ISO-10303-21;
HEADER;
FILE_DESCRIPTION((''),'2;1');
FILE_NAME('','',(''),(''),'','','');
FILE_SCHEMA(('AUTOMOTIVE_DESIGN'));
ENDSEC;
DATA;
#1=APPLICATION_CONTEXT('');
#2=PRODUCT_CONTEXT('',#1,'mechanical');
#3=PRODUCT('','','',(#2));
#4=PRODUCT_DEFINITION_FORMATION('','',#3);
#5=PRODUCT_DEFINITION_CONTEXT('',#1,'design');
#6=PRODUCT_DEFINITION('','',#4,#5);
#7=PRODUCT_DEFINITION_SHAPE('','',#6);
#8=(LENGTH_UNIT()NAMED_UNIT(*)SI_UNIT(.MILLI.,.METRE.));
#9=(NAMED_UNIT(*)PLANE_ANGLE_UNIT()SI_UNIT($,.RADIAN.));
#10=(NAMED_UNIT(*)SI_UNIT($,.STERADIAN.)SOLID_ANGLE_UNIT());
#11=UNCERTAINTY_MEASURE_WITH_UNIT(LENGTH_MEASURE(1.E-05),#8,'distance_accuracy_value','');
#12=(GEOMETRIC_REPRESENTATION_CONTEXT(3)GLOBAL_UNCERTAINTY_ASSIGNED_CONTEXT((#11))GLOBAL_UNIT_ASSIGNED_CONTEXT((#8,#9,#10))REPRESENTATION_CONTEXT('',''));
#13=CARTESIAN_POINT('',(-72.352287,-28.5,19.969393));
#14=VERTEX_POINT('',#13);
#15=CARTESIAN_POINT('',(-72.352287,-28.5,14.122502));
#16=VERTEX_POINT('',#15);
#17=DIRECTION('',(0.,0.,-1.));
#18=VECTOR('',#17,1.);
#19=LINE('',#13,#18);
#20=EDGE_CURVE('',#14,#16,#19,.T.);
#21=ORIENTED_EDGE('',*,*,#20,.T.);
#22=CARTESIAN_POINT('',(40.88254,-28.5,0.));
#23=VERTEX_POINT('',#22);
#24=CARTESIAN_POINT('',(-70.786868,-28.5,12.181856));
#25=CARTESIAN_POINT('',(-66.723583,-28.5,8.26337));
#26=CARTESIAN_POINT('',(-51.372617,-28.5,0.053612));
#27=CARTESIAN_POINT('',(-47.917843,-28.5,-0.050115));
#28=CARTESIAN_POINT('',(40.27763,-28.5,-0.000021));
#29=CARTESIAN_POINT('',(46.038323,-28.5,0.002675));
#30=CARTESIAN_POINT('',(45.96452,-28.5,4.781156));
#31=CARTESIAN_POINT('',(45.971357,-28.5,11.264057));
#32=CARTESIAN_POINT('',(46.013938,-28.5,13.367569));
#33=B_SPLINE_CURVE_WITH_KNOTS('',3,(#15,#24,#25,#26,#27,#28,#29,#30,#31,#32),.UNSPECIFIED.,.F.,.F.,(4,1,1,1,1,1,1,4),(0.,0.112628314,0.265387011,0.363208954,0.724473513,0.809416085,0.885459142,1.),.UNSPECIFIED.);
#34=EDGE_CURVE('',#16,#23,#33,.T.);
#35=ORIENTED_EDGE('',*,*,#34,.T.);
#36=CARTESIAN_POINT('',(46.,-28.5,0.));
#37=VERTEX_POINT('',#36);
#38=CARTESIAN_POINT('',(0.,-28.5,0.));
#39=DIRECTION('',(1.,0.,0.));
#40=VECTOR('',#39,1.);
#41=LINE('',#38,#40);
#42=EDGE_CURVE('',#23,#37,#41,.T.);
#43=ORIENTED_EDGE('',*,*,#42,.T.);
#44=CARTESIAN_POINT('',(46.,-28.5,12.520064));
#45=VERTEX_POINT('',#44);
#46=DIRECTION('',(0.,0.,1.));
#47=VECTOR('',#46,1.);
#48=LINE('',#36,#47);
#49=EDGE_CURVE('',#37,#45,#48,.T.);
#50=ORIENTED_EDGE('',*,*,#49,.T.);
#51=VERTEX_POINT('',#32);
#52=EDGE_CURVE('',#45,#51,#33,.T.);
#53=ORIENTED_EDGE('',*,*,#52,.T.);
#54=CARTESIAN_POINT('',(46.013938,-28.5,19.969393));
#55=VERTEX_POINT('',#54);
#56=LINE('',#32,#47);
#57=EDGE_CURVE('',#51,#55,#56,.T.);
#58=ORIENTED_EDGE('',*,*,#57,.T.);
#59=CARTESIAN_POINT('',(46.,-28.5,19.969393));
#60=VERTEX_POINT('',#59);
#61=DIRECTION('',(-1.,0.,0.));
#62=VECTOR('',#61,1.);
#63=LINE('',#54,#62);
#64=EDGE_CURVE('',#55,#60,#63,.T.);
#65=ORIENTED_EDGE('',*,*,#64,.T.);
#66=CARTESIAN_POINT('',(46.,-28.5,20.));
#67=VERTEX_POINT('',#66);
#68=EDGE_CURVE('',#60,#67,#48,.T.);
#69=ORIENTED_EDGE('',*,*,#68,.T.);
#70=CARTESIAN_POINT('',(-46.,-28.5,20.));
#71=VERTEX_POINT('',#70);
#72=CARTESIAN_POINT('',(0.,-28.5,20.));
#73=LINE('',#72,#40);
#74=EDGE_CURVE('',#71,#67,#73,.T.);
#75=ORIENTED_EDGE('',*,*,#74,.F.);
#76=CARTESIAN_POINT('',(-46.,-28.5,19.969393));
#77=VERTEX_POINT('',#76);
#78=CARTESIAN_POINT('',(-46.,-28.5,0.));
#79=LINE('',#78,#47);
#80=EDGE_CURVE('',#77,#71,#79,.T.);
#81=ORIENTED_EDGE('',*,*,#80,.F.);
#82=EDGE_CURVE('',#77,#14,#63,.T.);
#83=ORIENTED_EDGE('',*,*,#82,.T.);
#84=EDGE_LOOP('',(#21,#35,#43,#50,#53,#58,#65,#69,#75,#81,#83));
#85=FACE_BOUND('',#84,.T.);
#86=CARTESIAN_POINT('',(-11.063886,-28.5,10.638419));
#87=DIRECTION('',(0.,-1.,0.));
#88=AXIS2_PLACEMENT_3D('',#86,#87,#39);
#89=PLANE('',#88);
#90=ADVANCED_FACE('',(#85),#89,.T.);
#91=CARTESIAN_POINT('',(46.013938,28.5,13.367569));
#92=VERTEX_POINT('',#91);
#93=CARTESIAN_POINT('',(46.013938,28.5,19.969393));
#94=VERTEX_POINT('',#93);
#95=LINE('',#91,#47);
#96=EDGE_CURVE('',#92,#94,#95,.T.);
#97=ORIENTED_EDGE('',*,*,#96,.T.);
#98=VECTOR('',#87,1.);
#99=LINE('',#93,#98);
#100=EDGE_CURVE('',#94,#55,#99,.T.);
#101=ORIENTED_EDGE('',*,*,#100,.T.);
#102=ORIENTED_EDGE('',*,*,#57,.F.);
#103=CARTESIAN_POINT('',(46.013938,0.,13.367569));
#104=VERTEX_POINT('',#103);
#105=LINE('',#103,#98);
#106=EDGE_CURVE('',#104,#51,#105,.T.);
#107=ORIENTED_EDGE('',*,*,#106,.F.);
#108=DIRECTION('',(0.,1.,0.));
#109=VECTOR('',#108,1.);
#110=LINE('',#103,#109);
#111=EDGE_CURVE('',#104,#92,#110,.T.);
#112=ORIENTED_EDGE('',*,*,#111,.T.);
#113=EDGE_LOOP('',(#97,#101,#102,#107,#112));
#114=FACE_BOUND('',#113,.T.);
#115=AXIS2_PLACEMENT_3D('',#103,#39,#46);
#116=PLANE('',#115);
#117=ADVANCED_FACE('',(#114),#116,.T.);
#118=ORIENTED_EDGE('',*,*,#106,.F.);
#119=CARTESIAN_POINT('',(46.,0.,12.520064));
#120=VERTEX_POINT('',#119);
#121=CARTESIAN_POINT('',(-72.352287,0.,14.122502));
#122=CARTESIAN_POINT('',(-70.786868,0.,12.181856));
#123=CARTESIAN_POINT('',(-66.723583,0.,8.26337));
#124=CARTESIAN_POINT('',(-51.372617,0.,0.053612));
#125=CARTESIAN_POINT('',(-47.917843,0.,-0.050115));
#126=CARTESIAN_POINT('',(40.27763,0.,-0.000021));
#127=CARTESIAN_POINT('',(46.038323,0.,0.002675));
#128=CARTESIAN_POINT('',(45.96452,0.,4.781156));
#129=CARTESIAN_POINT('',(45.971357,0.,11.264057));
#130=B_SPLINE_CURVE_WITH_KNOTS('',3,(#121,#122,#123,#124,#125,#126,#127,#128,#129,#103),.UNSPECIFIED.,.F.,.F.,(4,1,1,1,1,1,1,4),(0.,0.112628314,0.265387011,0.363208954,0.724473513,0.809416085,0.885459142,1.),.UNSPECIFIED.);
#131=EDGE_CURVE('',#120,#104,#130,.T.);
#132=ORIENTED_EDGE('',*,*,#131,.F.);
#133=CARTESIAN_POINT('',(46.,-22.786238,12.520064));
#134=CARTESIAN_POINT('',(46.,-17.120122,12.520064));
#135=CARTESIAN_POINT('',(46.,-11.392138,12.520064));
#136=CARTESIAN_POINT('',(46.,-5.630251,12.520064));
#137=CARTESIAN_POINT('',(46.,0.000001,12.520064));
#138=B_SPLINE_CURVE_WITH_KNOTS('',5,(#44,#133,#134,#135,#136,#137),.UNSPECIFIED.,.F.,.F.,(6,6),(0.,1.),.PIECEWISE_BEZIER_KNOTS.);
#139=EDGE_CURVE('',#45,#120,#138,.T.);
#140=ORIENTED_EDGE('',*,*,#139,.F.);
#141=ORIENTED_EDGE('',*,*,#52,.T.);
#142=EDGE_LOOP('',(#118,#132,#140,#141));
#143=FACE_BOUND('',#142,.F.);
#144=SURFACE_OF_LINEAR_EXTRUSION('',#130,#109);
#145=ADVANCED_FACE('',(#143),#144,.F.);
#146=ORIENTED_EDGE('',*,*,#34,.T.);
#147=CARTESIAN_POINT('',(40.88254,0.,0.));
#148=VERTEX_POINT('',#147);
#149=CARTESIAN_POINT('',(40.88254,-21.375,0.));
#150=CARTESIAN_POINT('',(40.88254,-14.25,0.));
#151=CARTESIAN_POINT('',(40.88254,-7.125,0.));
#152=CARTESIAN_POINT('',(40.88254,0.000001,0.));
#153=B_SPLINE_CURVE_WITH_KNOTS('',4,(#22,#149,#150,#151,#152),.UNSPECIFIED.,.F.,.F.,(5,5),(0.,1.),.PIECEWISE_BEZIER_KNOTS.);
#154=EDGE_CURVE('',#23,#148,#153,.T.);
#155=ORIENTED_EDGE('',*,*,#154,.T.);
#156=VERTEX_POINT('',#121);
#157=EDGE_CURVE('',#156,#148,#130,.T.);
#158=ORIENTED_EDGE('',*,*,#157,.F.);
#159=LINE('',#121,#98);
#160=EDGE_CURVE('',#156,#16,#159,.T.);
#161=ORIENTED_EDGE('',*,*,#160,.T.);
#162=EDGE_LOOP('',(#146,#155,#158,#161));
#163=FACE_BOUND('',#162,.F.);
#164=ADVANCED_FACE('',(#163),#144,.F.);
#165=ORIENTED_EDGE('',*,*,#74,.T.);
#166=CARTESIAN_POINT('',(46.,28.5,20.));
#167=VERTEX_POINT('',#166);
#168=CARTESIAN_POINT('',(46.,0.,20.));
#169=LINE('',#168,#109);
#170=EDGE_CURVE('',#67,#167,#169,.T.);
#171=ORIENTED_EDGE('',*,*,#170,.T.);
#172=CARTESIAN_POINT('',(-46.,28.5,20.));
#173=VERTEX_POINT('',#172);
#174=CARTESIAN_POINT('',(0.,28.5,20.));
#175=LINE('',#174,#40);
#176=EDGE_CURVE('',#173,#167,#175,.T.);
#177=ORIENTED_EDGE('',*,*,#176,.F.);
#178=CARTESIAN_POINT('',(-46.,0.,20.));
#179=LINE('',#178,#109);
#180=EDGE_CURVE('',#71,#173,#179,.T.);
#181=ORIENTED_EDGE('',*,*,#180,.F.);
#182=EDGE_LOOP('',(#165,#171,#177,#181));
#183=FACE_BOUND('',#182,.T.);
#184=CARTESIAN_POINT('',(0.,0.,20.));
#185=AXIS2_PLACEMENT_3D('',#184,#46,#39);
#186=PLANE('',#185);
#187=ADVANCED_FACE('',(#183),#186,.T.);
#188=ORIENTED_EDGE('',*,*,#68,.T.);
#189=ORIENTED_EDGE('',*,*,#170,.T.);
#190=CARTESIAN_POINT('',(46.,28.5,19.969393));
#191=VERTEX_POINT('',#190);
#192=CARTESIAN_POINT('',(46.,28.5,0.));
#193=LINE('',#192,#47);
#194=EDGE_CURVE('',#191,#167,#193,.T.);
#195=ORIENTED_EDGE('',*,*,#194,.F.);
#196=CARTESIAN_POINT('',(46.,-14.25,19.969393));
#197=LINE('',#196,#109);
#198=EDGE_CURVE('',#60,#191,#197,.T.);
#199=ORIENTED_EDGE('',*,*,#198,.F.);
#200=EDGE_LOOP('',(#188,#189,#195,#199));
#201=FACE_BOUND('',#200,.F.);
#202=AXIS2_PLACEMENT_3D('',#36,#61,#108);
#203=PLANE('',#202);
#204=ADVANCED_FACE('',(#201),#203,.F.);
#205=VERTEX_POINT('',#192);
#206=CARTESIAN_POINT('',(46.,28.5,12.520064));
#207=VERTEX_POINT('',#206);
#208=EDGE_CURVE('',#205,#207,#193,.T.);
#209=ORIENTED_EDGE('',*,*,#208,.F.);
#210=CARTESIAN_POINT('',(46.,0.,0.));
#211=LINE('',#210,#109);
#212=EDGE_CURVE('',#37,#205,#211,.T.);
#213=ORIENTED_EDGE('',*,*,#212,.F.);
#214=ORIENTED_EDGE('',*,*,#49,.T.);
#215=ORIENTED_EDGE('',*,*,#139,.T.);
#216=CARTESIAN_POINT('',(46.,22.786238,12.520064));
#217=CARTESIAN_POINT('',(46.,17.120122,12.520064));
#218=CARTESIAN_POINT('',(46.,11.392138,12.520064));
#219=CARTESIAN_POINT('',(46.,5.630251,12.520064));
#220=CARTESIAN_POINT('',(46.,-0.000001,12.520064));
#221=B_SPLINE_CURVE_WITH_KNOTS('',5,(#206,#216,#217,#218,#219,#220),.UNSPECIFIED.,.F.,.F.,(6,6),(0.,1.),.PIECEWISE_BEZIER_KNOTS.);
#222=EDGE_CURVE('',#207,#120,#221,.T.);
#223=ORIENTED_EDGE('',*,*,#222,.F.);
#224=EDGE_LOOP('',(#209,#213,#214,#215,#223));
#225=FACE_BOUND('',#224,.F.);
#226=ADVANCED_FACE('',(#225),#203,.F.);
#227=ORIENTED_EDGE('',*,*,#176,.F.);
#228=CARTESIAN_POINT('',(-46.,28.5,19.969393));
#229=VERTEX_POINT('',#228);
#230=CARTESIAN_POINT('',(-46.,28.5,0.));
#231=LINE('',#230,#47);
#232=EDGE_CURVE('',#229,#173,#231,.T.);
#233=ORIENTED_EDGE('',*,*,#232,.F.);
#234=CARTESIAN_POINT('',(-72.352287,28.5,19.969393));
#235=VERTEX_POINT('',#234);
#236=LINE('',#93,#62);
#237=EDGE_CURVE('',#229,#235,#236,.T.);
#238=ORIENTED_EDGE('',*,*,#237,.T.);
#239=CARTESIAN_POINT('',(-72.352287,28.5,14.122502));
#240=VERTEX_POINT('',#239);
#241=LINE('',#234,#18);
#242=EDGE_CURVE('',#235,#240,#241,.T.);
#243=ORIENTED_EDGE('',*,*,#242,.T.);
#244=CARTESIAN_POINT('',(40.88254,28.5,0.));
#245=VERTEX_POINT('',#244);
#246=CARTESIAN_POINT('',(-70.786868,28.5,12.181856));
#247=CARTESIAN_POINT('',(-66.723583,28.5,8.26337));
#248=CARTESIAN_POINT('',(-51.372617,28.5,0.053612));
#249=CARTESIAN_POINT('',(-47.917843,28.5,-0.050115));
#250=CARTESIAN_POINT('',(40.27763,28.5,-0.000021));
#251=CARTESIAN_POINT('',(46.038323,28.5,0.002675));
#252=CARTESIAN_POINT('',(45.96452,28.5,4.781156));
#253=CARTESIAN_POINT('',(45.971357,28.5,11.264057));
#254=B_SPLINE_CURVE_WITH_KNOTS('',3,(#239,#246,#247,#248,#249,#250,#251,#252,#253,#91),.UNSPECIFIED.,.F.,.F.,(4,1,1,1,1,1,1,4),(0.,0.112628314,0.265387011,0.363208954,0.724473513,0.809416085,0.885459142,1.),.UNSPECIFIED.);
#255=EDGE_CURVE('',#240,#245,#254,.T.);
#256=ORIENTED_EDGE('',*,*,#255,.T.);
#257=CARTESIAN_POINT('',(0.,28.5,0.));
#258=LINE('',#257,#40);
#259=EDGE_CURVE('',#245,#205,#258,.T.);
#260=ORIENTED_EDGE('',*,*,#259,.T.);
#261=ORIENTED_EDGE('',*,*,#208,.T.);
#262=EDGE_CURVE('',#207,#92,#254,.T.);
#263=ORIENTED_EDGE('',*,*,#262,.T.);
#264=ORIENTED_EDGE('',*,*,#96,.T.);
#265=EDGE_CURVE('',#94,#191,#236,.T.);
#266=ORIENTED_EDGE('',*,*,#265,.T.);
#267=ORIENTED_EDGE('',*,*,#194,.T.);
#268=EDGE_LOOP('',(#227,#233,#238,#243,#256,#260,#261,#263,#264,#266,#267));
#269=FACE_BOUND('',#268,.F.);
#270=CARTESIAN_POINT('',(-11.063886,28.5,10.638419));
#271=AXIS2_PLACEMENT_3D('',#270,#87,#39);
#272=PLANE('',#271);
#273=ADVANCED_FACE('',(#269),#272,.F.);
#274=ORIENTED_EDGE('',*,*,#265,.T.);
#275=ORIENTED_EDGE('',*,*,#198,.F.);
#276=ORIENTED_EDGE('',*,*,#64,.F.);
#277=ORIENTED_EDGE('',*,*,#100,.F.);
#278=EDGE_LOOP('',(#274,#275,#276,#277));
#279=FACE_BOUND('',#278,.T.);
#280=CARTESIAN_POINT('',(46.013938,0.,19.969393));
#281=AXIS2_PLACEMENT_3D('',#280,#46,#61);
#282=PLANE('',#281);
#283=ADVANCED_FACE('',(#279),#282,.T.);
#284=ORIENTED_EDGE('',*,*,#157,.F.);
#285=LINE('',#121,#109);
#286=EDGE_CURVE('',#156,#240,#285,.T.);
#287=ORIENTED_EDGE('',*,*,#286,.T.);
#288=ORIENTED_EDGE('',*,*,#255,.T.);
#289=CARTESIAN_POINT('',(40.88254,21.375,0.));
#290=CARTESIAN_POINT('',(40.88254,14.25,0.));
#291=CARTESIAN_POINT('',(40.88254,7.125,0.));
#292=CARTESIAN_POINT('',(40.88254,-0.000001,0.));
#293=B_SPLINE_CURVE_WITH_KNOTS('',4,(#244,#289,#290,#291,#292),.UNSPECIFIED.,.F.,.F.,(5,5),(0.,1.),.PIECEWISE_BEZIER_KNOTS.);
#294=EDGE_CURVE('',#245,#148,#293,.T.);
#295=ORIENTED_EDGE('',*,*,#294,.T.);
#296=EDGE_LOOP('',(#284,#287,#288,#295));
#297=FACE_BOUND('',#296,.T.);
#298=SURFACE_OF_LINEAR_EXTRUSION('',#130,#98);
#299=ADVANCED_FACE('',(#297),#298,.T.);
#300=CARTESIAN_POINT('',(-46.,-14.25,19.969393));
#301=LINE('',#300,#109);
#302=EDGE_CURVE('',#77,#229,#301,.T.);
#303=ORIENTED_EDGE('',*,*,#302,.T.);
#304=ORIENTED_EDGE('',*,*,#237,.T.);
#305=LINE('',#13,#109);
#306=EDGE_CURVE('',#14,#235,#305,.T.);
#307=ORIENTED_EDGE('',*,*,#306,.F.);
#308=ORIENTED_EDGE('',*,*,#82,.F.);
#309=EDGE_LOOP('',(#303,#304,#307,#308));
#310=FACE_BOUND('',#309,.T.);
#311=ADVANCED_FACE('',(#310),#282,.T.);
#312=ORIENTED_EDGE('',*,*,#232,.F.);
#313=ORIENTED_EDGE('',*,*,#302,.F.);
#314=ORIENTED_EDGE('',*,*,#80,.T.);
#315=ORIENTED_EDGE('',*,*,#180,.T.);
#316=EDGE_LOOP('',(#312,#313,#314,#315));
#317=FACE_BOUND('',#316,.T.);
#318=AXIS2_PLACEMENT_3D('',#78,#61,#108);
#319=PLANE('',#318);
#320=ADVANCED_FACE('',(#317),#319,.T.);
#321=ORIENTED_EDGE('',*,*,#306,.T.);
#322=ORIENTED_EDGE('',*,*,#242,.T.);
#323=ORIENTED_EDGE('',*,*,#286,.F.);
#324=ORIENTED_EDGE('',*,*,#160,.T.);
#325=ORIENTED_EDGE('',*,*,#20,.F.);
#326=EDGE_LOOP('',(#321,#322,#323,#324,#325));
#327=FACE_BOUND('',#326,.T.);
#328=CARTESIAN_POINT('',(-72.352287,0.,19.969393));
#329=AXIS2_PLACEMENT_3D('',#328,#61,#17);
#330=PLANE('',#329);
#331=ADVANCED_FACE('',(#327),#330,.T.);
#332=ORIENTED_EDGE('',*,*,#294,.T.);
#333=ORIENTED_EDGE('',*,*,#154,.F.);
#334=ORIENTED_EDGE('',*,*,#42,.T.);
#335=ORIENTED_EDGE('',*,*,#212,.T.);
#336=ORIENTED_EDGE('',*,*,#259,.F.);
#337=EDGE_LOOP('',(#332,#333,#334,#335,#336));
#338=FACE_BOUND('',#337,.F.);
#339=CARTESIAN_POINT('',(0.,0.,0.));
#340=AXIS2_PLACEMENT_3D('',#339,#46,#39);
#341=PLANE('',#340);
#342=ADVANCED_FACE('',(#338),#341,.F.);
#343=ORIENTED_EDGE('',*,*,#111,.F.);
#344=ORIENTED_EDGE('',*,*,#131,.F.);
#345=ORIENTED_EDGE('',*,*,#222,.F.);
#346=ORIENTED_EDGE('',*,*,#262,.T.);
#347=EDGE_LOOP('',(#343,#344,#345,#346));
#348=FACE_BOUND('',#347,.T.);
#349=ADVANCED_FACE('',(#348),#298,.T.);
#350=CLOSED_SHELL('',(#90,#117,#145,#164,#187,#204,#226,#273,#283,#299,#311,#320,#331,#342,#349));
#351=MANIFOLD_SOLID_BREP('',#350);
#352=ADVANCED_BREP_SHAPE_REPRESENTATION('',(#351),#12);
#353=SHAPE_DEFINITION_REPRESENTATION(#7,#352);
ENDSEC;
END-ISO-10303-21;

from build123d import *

# Parameters (mm, degrees)
F0_W     = 92
F0_H     = 57
F1_DEPTH = 20
F3_DEPTH = 28.5


with BuildPart() as f1:
    # F0 (on Top) → F1 (new body)
    with BuildSketch(Plane.XY):
        Rectangle(F0_W, F0_H)
    extrude(amount=F1_DEPTH)

    # F2 (on Front) → F3 (join, symmetric)
    with BuildSketch(Plane.XZ):
        with BuildLine():
            add(Edge.make_bspline(
                [(-72.352286854, 14.1225020504), (-70.7868680165, 12.1818560467), (-66.7235831643, 8.2633703724), (-51.3726170989, 0.0536119118), (-47.9178431553, -0.0501145074), (40.2776295905, -2.08522e-05), (46.0383226643, 0.002674896), (45.9645196982, 4.7811559883), (45.9713565107, 11.2640567196), (46.0139377281, 13.3675688924)],
                knots=[0, 0, 0, 0, 0.112628314, 0.2653870111, 0.3632089544, 0.7244735131, 0.8094160846, 0.8854591422, 1, 1, 1, 1], degree=3))
            Line((46.0139377281, 13.3675688924), (46.0139377281, 19.9693925679))
            Line((46.0139377281, 19.9693925679), (-72.352286854, 19.9693925679))
            Line((-72.352286854, 19.9693925679), (-72.352286854, 14.1225020504))
        make_face()
    extrude(amount=F3_DEPTH, both=True)


solid = f1.part
